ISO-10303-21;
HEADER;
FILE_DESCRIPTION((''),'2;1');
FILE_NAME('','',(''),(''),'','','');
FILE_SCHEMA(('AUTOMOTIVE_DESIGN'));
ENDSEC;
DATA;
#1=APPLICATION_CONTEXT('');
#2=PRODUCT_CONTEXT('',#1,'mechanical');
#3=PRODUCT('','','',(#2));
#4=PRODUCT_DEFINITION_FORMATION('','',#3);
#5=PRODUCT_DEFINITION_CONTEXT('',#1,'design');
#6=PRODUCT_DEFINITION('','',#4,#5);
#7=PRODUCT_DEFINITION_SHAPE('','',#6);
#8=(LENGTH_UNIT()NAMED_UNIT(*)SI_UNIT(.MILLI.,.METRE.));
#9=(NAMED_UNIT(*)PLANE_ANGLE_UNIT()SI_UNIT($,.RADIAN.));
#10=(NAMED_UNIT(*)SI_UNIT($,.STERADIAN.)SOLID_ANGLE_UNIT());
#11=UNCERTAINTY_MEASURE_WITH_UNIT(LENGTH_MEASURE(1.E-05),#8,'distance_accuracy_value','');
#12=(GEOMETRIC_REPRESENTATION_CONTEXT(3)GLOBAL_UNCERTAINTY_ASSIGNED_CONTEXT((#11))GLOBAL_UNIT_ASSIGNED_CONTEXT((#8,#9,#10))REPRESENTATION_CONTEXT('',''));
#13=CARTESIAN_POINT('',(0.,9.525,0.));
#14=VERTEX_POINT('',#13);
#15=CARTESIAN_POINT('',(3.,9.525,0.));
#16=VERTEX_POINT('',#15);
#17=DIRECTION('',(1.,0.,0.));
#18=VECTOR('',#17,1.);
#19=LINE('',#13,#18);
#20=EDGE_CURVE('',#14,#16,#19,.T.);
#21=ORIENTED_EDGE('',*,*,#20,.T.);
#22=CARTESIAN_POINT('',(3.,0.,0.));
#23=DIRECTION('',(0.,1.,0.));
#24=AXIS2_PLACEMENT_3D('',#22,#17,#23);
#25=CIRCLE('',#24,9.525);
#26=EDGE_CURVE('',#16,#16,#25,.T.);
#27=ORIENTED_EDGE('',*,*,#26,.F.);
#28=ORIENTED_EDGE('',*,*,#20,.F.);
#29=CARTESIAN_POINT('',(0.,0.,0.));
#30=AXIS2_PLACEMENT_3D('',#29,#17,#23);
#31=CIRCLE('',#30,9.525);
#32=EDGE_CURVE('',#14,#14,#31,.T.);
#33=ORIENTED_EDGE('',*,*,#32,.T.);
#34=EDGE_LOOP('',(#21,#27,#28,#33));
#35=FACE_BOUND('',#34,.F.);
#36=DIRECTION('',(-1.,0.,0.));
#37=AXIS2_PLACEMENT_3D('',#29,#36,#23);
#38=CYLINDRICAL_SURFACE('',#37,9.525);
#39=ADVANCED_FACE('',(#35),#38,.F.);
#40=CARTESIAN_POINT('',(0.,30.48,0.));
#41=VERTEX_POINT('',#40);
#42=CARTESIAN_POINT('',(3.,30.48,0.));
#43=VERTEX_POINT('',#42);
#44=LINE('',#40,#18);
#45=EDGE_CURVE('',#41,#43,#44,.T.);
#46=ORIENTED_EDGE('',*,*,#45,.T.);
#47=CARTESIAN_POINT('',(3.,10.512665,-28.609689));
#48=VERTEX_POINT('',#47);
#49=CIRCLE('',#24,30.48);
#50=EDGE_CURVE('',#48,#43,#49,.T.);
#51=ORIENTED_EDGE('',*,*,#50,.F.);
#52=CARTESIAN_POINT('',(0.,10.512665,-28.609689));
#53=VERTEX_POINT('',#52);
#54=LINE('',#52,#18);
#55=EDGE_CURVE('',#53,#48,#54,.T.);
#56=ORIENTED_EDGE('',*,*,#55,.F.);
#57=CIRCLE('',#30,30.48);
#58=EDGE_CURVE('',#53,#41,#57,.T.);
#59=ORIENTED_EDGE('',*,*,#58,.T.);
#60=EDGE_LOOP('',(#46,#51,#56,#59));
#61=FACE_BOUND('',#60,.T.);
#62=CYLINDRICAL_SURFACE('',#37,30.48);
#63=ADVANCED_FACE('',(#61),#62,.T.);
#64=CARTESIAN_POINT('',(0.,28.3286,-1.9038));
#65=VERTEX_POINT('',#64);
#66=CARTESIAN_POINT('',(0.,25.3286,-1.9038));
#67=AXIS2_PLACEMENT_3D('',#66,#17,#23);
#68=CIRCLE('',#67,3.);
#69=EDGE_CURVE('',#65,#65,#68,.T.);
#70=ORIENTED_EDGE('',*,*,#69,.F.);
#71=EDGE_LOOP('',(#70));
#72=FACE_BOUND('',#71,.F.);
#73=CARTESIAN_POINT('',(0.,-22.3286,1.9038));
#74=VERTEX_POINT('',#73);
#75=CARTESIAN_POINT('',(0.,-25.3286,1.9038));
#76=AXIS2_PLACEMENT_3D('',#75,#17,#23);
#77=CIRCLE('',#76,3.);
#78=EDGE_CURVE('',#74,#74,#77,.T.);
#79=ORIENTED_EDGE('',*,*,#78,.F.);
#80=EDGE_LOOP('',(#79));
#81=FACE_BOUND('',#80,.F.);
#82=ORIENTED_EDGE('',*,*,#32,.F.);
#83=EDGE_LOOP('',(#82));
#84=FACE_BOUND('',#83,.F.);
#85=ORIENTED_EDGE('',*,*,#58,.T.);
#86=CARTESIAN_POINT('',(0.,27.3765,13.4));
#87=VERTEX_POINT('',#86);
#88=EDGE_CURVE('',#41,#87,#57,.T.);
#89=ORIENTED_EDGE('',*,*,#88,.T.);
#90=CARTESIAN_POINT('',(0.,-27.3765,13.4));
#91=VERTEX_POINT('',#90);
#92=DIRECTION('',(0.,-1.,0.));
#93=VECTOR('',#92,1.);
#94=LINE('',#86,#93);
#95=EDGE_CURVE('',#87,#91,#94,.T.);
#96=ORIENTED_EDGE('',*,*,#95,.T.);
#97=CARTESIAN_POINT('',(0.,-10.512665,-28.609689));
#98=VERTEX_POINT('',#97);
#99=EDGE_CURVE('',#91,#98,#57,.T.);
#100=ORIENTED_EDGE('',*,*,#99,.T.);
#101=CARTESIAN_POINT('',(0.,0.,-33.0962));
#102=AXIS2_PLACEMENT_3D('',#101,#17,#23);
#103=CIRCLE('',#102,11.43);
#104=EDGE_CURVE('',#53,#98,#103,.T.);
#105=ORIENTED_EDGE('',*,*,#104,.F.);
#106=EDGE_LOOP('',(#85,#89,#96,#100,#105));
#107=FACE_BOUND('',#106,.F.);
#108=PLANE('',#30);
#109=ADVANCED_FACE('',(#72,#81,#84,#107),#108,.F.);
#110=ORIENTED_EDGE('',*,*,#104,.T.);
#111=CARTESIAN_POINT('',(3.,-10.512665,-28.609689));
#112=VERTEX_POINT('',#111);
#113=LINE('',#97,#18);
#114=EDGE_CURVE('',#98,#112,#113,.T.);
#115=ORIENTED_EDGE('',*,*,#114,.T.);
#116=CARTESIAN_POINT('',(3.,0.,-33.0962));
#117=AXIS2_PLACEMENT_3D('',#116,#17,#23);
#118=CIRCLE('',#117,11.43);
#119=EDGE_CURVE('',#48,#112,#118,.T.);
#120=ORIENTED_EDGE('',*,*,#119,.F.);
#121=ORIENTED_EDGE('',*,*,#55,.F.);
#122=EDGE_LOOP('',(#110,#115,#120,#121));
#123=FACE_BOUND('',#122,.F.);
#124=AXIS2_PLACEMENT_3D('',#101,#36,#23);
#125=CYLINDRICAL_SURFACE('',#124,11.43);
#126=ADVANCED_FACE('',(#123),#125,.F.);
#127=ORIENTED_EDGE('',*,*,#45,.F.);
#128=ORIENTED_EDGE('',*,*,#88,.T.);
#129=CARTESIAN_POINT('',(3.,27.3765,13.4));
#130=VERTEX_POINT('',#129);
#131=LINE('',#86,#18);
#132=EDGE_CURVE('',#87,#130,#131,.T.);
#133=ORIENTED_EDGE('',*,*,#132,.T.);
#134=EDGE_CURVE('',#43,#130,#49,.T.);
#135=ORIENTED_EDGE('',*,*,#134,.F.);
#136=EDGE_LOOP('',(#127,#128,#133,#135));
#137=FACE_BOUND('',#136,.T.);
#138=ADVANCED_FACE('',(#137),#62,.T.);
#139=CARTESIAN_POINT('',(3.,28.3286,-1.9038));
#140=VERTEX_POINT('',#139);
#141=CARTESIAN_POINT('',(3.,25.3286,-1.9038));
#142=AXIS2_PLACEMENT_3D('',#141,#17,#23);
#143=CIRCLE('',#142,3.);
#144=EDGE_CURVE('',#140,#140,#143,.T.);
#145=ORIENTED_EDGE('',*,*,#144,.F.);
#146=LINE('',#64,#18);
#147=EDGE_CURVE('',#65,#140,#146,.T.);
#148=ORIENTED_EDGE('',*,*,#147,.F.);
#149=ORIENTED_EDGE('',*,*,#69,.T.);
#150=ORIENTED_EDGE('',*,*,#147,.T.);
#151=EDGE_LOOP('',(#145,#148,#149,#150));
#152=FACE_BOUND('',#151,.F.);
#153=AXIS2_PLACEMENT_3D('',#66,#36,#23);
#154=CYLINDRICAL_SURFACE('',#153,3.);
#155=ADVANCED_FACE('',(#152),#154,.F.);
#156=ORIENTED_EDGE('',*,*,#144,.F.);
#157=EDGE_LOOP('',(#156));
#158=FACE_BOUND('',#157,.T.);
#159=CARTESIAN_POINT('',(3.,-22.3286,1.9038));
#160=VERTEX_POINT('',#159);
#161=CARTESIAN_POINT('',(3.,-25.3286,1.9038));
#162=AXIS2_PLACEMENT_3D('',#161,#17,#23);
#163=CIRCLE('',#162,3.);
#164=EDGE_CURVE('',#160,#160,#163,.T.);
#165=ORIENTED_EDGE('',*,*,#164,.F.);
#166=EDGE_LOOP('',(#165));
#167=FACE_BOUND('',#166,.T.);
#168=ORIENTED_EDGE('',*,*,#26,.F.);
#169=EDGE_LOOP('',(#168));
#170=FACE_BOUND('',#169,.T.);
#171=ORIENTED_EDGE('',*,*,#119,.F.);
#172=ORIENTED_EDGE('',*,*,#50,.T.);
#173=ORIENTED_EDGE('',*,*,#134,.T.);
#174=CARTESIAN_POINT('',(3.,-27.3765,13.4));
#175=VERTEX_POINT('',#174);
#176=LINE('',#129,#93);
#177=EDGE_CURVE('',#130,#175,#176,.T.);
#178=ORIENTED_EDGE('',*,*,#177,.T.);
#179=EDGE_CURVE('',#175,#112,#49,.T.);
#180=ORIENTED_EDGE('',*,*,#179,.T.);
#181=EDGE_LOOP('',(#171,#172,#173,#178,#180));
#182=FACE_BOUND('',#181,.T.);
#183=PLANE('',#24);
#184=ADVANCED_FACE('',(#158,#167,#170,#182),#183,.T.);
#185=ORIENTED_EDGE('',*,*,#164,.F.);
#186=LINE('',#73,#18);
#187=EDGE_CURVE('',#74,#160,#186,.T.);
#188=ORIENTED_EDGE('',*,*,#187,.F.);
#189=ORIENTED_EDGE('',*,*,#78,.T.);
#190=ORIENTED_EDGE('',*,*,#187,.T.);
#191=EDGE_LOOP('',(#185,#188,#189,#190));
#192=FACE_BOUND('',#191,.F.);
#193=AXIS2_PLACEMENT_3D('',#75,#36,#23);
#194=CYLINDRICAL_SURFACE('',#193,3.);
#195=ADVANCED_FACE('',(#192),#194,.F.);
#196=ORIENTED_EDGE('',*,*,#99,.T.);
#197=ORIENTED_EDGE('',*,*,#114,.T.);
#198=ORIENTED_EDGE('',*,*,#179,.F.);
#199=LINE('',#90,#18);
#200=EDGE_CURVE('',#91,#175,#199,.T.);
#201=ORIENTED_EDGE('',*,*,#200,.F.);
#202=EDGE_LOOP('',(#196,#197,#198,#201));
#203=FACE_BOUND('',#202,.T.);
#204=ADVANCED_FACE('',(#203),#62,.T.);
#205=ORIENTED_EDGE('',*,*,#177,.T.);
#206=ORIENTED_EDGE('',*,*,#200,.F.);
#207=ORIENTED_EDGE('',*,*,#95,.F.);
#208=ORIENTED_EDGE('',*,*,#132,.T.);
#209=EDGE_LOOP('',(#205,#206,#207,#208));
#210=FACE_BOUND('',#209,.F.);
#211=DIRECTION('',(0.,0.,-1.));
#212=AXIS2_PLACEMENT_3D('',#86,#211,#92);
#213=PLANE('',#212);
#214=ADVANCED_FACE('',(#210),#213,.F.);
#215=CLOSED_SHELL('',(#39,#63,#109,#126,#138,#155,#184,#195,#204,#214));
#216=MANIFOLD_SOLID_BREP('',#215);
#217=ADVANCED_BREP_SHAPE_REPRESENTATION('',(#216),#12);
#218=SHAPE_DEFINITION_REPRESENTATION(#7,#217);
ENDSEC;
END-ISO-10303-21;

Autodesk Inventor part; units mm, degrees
ref_plane "YZ Plane" through (0, 0, 0) normal (1, 0, 0) x (0, 1, 0)
ref_plane "XZ Plane" through (0, 0, 0) normal (0, 1, 0) x (-1, 0, 0)
ref_plane "XY Plane" through (0, 0, 0) normal (0, 0, 1) x (1, 0, 0)
sketch "Sketch1" plane through (0, 0, 0) normal (1, 0, 0) x (0, 1, 0)
  circle A0 centre (0, 0) radius 30.48
  circle A1 centre (0, 0) radius 9.525
  circle A2 centre (25.3286, -1.9038) radius 3
  circle A3 centre (-25.3286, 1.9038) radius 3
  circle A4 centre (0, -33.0962) radius 11.43
  line L0 (27.3765, 13.4) -> (-27.3765, 13.4)
  line L1 (-25.3286, 1.9038) -> (25.3286, -1.9038) construction
  line L2 (0, -33.0962) -> (-25.3286, -33.0962)
  point P0 (10.5127, -28.6097)
  point P1 (-10.5127, -28.6097)
  dimension "d0" = 6
  dimension "d2" = 19.05
  dimension "d3" = 60.96
  dimension "d6" = 22.86
  dimension "d8" = 50.8
  dimension "d9" = 13.4
  dimension "d11" = 70
  dimension "d12" = 33.0962
extrude "Plate1" add sketch "Sketch1" along normal blind 3 contours A0 A4 L0
equation "\"BendRadius\" = Thickness"
equation "\"BendReliefWidth\" = Thickness"
equation "\"BendReliefDepth\" = 0.5 * Thickness"
equation "\"CornerReliefSize\" = 4 * Thickness"
equation "\"MinimumRemnant\" = 2 * Thickness"
equation "\"TransitionRadius\" = BendRadius"
equation "\"JacobiRadiusSize\" = BendRadius"
equation "\"GapSize\" = Thickness"
equation "\"d7\" = BendRadius"
equation "\"Thickness\" = 3"
properties part number "MotorSpacer" material "ABS Plastic"
